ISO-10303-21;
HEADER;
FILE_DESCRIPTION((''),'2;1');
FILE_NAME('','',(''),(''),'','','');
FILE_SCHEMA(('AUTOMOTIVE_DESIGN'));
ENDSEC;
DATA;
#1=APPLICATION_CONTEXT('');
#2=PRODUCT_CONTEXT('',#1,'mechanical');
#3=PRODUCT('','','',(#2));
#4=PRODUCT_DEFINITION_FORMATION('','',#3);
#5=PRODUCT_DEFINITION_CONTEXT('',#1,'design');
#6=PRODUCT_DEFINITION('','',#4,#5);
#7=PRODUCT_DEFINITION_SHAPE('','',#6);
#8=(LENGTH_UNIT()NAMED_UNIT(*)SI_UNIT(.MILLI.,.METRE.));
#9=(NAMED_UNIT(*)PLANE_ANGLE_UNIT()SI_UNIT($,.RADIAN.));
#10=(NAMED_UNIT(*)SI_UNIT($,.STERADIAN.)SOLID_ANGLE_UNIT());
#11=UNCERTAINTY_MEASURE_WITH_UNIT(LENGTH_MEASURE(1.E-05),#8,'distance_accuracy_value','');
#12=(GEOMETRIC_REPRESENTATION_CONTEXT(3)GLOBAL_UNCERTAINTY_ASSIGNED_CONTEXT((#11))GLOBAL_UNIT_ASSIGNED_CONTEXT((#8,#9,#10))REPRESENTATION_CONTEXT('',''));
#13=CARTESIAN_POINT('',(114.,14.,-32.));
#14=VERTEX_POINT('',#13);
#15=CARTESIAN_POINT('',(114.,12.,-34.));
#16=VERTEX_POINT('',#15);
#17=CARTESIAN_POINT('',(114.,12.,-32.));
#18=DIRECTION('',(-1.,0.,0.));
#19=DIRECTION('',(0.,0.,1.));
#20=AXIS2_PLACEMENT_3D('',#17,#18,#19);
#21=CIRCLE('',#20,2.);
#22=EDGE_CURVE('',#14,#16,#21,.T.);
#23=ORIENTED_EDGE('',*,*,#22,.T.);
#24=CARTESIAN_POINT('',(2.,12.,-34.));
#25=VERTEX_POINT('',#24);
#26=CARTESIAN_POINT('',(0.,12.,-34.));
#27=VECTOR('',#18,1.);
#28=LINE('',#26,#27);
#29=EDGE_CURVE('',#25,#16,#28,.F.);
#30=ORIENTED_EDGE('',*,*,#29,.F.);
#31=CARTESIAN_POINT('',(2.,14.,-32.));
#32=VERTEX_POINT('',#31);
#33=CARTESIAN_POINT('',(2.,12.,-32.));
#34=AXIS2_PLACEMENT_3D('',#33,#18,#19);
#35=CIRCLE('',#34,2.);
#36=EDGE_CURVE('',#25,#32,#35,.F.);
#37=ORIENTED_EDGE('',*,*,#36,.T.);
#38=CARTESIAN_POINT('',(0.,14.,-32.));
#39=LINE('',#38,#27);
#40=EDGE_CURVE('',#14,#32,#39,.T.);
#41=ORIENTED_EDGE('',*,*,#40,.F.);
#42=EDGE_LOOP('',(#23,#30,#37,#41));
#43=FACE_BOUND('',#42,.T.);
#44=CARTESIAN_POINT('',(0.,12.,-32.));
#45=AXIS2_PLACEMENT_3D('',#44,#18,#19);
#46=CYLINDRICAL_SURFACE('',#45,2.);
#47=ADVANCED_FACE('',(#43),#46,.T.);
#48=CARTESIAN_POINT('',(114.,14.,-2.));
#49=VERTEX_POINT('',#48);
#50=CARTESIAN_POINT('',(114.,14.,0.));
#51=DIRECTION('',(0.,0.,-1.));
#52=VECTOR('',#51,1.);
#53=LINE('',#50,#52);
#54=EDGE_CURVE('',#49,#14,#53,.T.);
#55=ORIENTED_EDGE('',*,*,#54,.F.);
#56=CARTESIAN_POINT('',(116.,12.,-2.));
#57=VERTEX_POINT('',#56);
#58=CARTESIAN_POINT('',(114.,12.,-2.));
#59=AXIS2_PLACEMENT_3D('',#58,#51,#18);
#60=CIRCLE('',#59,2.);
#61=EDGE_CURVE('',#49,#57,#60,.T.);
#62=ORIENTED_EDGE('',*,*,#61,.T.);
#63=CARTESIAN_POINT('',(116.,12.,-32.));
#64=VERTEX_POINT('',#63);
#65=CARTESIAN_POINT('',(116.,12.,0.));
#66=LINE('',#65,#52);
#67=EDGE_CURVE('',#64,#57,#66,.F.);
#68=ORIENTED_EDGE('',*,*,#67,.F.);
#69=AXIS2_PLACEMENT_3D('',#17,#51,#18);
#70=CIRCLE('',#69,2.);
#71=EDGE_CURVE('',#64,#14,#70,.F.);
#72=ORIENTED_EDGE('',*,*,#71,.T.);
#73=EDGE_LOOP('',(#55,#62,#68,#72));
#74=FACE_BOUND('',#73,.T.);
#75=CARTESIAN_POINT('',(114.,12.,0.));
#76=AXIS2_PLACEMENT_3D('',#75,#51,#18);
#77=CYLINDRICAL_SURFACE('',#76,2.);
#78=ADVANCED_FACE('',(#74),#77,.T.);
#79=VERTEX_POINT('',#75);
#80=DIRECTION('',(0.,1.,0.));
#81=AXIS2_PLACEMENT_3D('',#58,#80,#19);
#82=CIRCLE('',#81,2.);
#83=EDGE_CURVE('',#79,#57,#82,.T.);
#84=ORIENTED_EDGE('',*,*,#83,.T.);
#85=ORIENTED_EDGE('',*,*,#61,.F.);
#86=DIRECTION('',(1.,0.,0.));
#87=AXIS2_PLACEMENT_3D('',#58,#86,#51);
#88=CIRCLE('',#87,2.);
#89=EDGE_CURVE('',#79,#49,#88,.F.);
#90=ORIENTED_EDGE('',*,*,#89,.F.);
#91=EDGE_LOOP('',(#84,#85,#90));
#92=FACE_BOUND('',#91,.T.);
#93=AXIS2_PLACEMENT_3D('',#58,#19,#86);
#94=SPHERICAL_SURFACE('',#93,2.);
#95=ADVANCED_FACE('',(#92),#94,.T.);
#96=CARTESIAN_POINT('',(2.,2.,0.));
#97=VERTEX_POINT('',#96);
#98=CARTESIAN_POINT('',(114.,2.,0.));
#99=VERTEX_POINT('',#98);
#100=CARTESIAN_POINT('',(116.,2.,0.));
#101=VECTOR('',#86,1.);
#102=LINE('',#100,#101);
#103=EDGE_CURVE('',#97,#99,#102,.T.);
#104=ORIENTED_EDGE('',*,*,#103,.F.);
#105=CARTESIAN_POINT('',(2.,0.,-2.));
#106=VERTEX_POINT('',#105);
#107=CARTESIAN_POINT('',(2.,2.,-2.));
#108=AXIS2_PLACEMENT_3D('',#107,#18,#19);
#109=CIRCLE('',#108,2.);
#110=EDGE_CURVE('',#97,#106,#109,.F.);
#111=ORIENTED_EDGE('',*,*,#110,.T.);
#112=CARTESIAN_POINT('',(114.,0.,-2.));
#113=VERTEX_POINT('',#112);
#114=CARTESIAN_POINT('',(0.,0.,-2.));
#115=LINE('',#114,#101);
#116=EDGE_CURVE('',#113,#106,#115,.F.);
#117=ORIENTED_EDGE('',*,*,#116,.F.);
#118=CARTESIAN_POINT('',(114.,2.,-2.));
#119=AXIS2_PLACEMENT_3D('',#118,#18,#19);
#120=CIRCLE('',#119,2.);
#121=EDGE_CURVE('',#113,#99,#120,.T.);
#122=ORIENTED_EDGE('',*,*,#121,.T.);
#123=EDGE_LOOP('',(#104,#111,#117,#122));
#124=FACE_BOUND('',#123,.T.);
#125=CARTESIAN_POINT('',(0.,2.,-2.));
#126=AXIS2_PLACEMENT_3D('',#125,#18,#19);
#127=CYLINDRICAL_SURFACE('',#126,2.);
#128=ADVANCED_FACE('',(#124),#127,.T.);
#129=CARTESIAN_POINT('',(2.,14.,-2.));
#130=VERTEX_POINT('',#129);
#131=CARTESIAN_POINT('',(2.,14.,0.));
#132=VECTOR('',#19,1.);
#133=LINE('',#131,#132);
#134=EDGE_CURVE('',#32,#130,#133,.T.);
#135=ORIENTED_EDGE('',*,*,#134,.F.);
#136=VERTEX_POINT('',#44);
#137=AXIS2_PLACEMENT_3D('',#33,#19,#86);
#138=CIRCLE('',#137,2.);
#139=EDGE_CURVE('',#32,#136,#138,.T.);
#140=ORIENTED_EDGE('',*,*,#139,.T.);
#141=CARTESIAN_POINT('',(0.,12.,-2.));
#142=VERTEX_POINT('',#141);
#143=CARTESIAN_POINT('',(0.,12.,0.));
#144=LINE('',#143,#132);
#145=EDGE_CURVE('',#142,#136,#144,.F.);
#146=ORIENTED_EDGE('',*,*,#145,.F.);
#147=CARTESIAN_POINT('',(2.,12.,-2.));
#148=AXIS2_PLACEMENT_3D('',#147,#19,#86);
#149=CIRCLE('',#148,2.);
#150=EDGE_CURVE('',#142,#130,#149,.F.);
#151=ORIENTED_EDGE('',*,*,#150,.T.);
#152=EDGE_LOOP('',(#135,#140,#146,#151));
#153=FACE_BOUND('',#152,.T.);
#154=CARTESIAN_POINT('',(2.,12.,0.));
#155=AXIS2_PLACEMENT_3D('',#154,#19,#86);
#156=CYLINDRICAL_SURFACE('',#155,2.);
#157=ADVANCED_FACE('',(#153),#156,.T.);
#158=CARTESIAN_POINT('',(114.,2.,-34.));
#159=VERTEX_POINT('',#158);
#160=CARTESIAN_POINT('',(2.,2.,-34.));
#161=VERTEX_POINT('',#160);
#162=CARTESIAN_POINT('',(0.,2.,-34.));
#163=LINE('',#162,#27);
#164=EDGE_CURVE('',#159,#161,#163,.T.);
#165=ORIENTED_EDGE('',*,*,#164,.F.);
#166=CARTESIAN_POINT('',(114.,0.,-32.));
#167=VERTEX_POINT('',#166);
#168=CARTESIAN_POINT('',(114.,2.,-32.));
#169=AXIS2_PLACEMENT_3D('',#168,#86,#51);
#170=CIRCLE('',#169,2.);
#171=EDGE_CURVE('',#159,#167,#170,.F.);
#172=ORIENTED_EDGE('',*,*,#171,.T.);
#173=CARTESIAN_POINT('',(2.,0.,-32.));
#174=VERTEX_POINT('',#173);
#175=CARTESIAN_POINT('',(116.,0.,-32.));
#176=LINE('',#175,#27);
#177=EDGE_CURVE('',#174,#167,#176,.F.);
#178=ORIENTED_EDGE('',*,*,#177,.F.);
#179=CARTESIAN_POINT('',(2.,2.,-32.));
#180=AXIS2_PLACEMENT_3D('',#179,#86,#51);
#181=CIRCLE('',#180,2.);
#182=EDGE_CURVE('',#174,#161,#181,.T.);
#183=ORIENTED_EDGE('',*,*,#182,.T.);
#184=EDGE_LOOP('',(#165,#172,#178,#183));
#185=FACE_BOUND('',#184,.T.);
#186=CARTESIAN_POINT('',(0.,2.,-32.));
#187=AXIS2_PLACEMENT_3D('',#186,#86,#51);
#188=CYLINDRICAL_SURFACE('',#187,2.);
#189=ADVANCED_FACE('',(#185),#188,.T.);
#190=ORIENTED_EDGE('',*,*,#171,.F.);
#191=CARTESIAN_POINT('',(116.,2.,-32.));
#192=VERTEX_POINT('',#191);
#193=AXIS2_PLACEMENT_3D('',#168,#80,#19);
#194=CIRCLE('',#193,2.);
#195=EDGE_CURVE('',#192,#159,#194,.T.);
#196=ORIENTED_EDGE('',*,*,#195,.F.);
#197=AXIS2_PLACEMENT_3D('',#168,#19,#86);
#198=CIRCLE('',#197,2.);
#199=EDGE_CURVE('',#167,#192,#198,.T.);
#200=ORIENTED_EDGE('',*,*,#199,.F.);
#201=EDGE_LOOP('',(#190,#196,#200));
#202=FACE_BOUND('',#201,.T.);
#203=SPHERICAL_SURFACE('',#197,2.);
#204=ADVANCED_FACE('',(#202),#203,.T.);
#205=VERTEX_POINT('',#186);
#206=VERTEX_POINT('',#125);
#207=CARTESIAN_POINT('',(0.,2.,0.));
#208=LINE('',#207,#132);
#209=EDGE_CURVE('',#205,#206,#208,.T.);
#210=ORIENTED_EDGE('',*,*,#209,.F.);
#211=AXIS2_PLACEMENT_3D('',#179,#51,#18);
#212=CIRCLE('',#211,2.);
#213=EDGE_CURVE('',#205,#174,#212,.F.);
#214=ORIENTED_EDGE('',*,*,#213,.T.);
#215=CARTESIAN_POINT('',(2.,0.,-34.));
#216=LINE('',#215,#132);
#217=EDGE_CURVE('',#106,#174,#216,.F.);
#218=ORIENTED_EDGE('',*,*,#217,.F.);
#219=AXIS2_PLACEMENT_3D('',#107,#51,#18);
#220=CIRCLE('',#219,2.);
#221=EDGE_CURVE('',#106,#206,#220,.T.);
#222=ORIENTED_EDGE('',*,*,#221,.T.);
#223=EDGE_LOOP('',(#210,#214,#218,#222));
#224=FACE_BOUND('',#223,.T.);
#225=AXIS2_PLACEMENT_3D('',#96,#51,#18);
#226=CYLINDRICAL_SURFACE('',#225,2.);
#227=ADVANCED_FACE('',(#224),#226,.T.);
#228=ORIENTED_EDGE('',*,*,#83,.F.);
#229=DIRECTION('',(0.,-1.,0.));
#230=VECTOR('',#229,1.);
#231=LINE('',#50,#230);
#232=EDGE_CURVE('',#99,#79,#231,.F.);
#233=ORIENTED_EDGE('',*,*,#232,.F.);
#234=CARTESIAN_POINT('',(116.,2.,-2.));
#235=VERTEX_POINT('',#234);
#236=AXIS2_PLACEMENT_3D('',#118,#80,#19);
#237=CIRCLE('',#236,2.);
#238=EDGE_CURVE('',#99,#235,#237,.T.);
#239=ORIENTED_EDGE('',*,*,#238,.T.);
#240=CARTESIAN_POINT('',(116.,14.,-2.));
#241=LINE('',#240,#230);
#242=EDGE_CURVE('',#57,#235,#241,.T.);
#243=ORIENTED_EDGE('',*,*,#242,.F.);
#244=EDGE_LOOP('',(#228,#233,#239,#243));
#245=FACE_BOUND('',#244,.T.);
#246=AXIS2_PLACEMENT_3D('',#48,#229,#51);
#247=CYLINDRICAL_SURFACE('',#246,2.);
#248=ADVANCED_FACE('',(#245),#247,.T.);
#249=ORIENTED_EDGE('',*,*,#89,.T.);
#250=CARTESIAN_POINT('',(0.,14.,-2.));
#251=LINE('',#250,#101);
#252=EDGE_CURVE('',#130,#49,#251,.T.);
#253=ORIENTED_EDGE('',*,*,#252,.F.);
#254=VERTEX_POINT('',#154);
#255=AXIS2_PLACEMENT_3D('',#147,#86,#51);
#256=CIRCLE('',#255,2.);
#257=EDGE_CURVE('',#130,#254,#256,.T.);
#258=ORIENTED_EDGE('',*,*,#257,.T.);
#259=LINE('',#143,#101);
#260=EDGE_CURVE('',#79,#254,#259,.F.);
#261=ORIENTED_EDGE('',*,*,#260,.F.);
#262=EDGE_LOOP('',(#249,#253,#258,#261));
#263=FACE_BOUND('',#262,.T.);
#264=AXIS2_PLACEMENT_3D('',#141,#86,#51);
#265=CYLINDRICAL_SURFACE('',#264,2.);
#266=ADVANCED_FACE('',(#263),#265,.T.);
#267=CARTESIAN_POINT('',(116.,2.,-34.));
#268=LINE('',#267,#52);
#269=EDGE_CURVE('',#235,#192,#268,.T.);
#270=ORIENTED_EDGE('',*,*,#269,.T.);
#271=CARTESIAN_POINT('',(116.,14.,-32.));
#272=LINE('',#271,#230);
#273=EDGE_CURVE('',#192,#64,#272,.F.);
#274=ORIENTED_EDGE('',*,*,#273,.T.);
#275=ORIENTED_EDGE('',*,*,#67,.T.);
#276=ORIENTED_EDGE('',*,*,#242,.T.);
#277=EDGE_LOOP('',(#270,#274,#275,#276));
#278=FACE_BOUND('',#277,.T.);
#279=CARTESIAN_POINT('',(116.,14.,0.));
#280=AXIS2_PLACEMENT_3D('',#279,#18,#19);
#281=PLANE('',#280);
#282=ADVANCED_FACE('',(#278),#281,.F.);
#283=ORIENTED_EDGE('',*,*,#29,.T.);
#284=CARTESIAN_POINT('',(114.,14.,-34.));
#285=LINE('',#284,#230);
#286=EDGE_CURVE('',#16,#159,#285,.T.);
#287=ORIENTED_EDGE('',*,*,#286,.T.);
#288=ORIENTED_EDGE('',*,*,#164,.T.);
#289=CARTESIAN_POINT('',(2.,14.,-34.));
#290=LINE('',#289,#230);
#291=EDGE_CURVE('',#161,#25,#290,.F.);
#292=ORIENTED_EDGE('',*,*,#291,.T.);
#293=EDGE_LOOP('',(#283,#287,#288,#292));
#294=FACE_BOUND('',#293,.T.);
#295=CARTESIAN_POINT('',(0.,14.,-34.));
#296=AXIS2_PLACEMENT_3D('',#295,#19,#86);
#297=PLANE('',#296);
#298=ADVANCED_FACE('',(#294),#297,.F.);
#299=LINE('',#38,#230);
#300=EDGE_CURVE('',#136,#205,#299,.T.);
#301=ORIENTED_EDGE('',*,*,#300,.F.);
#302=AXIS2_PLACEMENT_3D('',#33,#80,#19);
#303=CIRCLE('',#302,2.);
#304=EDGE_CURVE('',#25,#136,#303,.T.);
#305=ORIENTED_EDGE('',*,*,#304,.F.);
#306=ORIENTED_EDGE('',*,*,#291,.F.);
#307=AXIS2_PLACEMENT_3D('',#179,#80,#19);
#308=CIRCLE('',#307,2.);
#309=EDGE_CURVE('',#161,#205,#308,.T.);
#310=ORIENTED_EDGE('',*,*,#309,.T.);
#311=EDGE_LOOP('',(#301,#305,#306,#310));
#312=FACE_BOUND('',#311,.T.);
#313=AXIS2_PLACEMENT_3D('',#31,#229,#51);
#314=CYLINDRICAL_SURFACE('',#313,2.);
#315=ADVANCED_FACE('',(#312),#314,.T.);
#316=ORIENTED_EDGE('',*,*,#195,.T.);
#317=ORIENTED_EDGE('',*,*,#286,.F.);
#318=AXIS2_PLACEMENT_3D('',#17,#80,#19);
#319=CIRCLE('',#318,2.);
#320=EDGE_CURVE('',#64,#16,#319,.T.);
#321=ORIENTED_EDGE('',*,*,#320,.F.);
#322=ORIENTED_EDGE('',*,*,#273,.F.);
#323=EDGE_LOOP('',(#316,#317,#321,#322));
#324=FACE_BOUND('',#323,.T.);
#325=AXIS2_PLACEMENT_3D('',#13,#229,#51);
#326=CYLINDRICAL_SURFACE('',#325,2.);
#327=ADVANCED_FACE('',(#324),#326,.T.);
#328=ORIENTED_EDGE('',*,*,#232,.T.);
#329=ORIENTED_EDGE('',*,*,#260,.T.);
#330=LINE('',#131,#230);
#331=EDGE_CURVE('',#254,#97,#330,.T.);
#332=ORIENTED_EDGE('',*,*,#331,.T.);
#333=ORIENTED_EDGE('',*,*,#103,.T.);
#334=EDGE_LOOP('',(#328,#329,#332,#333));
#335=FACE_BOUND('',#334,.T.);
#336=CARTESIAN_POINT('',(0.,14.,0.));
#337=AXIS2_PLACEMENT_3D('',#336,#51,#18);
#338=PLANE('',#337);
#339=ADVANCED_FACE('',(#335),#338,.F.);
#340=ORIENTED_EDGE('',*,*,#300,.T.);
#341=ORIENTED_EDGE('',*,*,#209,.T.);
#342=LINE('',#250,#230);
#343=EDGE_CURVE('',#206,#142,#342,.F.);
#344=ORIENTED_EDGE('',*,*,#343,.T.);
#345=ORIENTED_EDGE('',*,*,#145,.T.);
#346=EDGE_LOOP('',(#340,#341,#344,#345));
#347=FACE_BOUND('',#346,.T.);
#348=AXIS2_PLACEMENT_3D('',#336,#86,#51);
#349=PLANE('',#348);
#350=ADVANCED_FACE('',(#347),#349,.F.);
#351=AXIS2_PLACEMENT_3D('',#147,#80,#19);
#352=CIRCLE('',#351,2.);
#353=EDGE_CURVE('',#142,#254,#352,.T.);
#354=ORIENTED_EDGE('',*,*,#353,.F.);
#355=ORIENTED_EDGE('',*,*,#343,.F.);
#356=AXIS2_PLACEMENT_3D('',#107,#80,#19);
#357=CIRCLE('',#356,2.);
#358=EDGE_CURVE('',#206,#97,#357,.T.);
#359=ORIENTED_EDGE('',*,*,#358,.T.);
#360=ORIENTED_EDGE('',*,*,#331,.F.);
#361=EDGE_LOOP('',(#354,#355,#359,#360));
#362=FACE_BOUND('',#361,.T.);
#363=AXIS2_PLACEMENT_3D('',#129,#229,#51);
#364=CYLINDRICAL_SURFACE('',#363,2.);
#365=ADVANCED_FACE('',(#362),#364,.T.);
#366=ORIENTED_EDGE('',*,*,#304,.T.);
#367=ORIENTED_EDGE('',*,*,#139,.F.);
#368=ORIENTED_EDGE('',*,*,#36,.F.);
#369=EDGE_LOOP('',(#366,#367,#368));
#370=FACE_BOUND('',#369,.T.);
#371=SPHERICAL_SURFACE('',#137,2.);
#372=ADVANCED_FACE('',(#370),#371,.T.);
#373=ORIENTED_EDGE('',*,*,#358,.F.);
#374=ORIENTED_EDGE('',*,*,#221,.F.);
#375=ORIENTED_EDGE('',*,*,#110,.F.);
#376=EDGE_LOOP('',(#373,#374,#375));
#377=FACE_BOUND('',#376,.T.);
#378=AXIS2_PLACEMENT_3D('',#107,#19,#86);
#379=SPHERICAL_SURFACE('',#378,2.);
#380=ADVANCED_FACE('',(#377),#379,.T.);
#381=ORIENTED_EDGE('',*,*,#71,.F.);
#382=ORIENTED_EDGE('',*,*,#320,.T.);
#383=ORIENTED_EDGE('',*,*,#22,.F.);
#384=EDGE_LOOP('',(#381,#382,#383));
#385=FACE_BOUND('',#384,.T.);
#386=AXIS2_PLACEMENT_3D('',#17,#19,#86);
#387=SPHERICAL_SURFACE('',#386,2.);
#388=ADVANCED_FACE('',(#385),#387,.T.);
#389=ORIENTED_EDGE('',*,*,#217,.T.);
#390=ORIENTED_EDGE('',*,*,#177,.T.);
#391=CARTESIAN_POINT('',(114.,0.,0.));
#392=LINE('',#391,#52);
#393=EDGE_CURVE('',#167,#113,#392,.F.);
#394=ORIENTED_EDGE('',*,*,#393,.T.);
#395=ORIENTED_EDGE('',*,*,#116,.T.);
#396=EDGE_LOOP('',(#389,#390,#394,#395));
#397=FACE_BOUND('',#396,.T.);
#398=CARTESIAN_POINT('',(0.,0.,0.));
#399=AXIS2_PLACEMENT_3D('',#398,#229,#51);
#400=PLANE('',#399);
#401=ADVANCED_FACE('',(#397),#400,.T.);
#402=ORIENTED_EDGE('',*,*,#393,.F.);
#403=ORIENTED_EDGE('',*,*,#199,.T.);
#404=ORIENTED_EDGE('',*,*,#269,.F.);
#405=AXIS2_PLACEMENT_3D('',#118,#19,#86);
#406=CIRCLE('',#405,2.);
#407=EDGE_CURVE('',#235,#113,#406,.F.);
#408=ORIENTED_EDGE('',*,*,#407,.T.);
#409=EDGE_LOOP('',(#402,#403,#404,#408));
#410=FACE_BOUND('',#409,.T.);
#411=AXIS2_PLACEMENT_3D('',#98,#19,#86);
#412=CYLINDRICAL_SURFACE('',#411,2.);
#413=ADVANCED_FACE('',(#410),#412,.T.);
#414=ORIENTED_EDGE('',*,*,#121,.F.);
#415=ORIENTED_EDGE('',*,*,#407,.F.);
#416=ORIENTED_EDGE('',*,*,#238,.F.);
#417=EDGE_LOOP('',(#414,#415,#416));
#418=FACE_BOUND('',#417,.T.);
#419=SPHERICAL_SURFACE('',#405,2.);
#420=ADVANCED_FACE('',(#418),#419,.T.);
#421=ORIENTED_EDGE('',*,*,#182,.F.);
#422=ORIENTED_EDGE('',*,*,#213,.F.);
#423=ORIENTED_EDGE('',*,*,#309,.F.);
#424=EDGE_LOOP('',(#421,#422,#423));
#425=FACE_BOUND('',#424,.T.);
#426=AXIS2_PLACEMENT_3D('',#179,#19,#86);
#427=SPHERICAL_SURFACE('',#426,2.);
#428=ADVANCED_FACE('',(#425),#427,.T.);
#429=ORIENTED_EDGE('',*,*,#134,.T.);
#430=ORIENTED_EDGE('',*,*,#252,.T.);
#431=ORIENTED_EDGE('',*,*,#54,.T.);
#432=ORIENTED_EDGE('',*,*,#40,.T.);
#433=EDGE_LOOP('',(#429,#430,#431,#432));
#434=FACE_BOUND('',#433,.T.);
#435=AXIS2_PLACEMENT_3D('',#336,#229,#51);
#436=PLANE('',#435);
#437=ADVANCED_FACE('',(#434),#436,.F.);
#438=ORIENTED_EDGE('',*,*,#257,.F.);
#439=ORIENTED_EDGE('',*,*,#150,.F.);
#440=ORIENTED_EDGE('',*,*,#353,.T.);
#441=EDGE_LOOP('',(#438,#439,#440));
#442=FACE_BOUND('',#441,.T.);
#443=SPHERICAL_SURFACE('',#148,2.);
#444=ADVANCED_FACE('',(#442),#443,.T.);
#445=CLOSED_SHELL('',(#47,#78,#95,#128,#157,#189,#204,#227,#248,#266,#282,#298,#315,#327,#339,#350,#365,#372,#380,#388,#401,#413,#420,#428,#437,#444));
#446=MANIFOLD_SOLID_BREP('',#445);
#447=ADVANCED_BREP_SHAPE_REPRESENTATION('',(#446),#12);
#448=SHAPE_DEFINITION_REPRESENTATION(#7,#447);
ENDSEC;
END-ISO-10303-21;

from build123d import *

# Parameters (mm, degrees)
ESBO_O1_W                = 116
ESBO_O1_H                = 34
RESSALTO_EXTRUS_O1_DEPTH = 14
FILETE1_R                = 2
FILETE2_R                = 2


with BuildPart() as part:
    # Esboço1 → Ressalto-extrusão1 (new body)
    with BuildSketch(Plane(origin=(0, 0, 0), x_dir=(1, 0, 0), z_dir=(0, 1, 0))):
        with Locations((58, 17)):
            Rectangle(ESBO_O1_W, ESBO_O1_H)
    extrude(amount=RESSALTO_EXTRUS_O1_DEPTH)

    # Filete1
    filete1_edges = [part.edges().sort_by_distance(p)[0] for p in [
        (116, 14, -17),
        (58, 14, -34),
        (0, 14, -17),
        (58, 0, -34),
        (116, 0, -17),
        (58, 0, 0),
        (0, 0, -17),
        (58, 14, 0),
    ]]
    fillet(filete1_edges, radius=FILETE1_R)

    # Filete2
    # the kernel refuses this fillet: 2 mm, written as the material it takes off along each edge
    with BuildSketch(Plane(origin=(2, 2, -32), x_dir=(0, 0, -1), z_dir=(-1, 0, 0))) as filete2_piece_1_section:
        Polygon((0, 0), (FILETE2_R, 0), (FILETE2_R, FILETE2_R), (0, FILETE2_R), align=None)
    filete2_piece_1 = extrude(amount=FILETE2_R, mode=Mode.PRIVATE)
    filete2_piece_1 = filete2_piece_1 - Plane(origin=(2, 2, -32), x_dir=(0, 0.7071067811865475, 0.7071067811865475), z_dir=(-1, 0, 0)) * Sphere(FILETE2_R, mode=Mode.PRIVATE)
    add(filete2_piece_1, mode=Mode.SUBTRACT)
    with BuildSketch(Plane(origin=(114, 2, -32), x_dir=(0, 0, -1), z_dir=(1, 0, 0))) as filete2_piece_2_section:
        Polygon((0, 0), (FILETE2_R, 0), (FILETE2_R, -FILETE2_R), (0, -FILETE2_R), align=None)
    filete2_piece_2 = extrude(amount=FILETE2_R, mode=Mode.PRIVATE)
    filete2_piece_2 = filete2_piece_2 - Plane(origin=(114, 2, -32), x_dir=(0, 0.7071067811865475, 0.7071067811865475), z_dir=(1, 0, 0)) * Sphere(FILETE2_R, mode=Mode.PRIVATE)
    add(filete2_piece_2, mode=Mode.SUBTRACT)
    with BuildSketch(Plane(origin=(2, 2, -2), x_dir=(-1, 0, 0), z_dir=(0, 0, 1))) as filete2_piece_3_section:
        Polygon((0, 0), (FILETE2_R, 0), (FILETE2_R, FILETE2_R), (0, FILETE2_R), align=None)
    filete2_piece_3 = extrude(amount=FILETE2_R, mode=Mode.PRIVATE)
    filete2_piece_3 = filete2_piece_3 - Plane(origin=(2, 2, -2), x_dir=(0.7071067811865475, 0.7071067811865475, 0), z_dir=(0, 0, 1)) * Sphere(FILETE2_R, mode=Mode.PRIVATE)
    add(filete2_piece_3, mode=Mode.SUBTRACT)
    with BuildSketch(Plane(origin=(114, 2, -2), x_dir=(1, 0, 0), z_dir=(0, 0, 1))) as filete2_piece_4_section:
        Polygon((0, 0), (FILETE2_R, 0), (FILETE2_R, -FILETE2_R), (0, -FILETE2_R), align=None)
    filete2_piece_4 = extrude(amount=FILETE2_R, mode=Mode.PRIVATE)
    filete2_piece_4 = filete2_piece_4 - Plane(origin=(114, 2, -2), x_dir=(-0.7071067811865475, 0.7071067811865475, 2.06882771026568e-15), z_dir=(0, 0, 1)) * Sphere(FILETE2_R, mode=Mode.PRIVATE)
    add(filete2_piece_4, mode=Mode.SUBTRACT)
    with BuildSketch(Plane(origin=(114, 12, -2), x_dir=(1, 0, 0), z_dir=(0, 0, 1))) as filete2_piece_5_section:
        Polygon((0, 0), (FILETE2_R, 0), (FILETE2_R, FILETE2_R), (0, FILETE2_R), align=None)
    filete2_piece_5 = extrude(amount=FILETE2_R, mode=Mode.PRIVATE)
    filete2_piece_5 = filete2_piece_5 - Plane(origin=(114, 12, -2), x_dir=(-0.7071067811865475, -0.7071067811865475, 2.06882771026568e-15), z_dir=(0, 0, 1)) * Sphere(FILETE2_R, mode=Mode.PRIVATE)
    add(filete2_piece_5, mode=Mode.SUBTRACT)
    with BuildSketch(Plane(origin=(2, 12, -2), x_dir=(-1, 0, 0), z_dir=(0, 0, 1))) as filete2_piece_6_section:
        Polygon((0, 0), (FILETE2_R, 0), (FILETE2_R, -FILETE2_R), (0, -FILETE2_R), align=None)
    filete2_piece_6 = extrude(amount=FILETE2_R, mode=Mode.PRIVATE)
    filete2_piece_6 = filete2_piece_6 - Plane(origin=(2, 12, -2), x_dir=(0.7071067811865475, -0.7071067811865475, 0), z_dir=(0, 0, 1)) * Sphere(FILETE2_R, mode=Mode.PRIVATE)
    add(filete2_piece_6, mode=Mode.SUBTRACT)
    with BuildSketch(Plane(origin=(114, 12, -32), x_dir=(0, 0, -1), z_dir=(1, 0, 0))) as filete2_piece_7_section:
        Polygon((0, 0), (FILETE2_R, 0), (FILETE2_R, FILETE2_R), (0, FILETE2_R), align=None)
    filete2_piece_7 = extrude(amount=FILETE2_R, mode=Mode.PRIVATE)
    filete2_piece_7 = filete2_piece_7 - Plane(origin=(114, 12, -32), x_dir=(0, -0.7071067811865475, 0.7071067811865475), z_dir=(1, 0, 0)) * Sphere(FILETE2_R, mode=Mode.PRIVATE)
    add(filete2_piece_7, mode=Mode.SUBTRACT)
    with BuildSketch(Plane(origin=(2, 12, -32), x_dir=(0, 0, -1), z_dir=(-1, 0, 0))) as filete2_piece_8_section:
        Polygon((0, 0), (FILETE2_R, 0), (FILETE2_R, -FILETE2_R), (0, -FILETE2_R), align=None)
    filete2_piece_8 = extrude(amount=FILETE2_R, mode=Mode.PRIVATE)
    filete2_piece_8 = filete2_piece_8 - Plane(origin=(2, 12, -32), x_dir=(0, -0.7071067811865475, 0.7071067811865475), z_dir=(-1, 0, 0)) * Sphere(FILETE2_R, mode=Mode.PRIVATE)
    add(filete2_piece_8, mode=Mode.SUBTRACT)
    with BuildSketch(Plane(origin=(116, 2, 0), x_dir=(-1, 0, 0), z_dir=(0, 1, 0)), Plane(origin=(116, 2, -34), x_dir=(0, 0, 1), z_dir=(0, 1, 0))) as filete2_piece_9:
        with BuildLine():
            CenterArc((FILETE2_R, -FILETE2_R), FILETE2_R, 90, 90)
            Line((0, -FILETE2_R), (0, 0))
            Line((0, 0), (FILETE2_R, 0))
        make_face()
    extrude(amount=10, mode=Mode.SUBTRACT)
    with BuildSketch(Plane(origin=(0, 2, 0), x_dir=(1, 0, 0), z_dir=(0, 1, 0)), Plane(origin=(0, 2, -34), x_dir=(0, 0, 1), z_dir=(0, 1, 0))) as filete2_piece_10:
        with BuildLine():
            CenterArc((FILETE2_R, FILETE2_R), FILETE2_R, 180, 90)
            Line((0, FILETE2_R), (0, 0))
            Line((0, 0), (FILETE2_R, 0))
        make_face()
    extrude(amount=10, mode=Mode.SUBTRACT)


solid = part.part
